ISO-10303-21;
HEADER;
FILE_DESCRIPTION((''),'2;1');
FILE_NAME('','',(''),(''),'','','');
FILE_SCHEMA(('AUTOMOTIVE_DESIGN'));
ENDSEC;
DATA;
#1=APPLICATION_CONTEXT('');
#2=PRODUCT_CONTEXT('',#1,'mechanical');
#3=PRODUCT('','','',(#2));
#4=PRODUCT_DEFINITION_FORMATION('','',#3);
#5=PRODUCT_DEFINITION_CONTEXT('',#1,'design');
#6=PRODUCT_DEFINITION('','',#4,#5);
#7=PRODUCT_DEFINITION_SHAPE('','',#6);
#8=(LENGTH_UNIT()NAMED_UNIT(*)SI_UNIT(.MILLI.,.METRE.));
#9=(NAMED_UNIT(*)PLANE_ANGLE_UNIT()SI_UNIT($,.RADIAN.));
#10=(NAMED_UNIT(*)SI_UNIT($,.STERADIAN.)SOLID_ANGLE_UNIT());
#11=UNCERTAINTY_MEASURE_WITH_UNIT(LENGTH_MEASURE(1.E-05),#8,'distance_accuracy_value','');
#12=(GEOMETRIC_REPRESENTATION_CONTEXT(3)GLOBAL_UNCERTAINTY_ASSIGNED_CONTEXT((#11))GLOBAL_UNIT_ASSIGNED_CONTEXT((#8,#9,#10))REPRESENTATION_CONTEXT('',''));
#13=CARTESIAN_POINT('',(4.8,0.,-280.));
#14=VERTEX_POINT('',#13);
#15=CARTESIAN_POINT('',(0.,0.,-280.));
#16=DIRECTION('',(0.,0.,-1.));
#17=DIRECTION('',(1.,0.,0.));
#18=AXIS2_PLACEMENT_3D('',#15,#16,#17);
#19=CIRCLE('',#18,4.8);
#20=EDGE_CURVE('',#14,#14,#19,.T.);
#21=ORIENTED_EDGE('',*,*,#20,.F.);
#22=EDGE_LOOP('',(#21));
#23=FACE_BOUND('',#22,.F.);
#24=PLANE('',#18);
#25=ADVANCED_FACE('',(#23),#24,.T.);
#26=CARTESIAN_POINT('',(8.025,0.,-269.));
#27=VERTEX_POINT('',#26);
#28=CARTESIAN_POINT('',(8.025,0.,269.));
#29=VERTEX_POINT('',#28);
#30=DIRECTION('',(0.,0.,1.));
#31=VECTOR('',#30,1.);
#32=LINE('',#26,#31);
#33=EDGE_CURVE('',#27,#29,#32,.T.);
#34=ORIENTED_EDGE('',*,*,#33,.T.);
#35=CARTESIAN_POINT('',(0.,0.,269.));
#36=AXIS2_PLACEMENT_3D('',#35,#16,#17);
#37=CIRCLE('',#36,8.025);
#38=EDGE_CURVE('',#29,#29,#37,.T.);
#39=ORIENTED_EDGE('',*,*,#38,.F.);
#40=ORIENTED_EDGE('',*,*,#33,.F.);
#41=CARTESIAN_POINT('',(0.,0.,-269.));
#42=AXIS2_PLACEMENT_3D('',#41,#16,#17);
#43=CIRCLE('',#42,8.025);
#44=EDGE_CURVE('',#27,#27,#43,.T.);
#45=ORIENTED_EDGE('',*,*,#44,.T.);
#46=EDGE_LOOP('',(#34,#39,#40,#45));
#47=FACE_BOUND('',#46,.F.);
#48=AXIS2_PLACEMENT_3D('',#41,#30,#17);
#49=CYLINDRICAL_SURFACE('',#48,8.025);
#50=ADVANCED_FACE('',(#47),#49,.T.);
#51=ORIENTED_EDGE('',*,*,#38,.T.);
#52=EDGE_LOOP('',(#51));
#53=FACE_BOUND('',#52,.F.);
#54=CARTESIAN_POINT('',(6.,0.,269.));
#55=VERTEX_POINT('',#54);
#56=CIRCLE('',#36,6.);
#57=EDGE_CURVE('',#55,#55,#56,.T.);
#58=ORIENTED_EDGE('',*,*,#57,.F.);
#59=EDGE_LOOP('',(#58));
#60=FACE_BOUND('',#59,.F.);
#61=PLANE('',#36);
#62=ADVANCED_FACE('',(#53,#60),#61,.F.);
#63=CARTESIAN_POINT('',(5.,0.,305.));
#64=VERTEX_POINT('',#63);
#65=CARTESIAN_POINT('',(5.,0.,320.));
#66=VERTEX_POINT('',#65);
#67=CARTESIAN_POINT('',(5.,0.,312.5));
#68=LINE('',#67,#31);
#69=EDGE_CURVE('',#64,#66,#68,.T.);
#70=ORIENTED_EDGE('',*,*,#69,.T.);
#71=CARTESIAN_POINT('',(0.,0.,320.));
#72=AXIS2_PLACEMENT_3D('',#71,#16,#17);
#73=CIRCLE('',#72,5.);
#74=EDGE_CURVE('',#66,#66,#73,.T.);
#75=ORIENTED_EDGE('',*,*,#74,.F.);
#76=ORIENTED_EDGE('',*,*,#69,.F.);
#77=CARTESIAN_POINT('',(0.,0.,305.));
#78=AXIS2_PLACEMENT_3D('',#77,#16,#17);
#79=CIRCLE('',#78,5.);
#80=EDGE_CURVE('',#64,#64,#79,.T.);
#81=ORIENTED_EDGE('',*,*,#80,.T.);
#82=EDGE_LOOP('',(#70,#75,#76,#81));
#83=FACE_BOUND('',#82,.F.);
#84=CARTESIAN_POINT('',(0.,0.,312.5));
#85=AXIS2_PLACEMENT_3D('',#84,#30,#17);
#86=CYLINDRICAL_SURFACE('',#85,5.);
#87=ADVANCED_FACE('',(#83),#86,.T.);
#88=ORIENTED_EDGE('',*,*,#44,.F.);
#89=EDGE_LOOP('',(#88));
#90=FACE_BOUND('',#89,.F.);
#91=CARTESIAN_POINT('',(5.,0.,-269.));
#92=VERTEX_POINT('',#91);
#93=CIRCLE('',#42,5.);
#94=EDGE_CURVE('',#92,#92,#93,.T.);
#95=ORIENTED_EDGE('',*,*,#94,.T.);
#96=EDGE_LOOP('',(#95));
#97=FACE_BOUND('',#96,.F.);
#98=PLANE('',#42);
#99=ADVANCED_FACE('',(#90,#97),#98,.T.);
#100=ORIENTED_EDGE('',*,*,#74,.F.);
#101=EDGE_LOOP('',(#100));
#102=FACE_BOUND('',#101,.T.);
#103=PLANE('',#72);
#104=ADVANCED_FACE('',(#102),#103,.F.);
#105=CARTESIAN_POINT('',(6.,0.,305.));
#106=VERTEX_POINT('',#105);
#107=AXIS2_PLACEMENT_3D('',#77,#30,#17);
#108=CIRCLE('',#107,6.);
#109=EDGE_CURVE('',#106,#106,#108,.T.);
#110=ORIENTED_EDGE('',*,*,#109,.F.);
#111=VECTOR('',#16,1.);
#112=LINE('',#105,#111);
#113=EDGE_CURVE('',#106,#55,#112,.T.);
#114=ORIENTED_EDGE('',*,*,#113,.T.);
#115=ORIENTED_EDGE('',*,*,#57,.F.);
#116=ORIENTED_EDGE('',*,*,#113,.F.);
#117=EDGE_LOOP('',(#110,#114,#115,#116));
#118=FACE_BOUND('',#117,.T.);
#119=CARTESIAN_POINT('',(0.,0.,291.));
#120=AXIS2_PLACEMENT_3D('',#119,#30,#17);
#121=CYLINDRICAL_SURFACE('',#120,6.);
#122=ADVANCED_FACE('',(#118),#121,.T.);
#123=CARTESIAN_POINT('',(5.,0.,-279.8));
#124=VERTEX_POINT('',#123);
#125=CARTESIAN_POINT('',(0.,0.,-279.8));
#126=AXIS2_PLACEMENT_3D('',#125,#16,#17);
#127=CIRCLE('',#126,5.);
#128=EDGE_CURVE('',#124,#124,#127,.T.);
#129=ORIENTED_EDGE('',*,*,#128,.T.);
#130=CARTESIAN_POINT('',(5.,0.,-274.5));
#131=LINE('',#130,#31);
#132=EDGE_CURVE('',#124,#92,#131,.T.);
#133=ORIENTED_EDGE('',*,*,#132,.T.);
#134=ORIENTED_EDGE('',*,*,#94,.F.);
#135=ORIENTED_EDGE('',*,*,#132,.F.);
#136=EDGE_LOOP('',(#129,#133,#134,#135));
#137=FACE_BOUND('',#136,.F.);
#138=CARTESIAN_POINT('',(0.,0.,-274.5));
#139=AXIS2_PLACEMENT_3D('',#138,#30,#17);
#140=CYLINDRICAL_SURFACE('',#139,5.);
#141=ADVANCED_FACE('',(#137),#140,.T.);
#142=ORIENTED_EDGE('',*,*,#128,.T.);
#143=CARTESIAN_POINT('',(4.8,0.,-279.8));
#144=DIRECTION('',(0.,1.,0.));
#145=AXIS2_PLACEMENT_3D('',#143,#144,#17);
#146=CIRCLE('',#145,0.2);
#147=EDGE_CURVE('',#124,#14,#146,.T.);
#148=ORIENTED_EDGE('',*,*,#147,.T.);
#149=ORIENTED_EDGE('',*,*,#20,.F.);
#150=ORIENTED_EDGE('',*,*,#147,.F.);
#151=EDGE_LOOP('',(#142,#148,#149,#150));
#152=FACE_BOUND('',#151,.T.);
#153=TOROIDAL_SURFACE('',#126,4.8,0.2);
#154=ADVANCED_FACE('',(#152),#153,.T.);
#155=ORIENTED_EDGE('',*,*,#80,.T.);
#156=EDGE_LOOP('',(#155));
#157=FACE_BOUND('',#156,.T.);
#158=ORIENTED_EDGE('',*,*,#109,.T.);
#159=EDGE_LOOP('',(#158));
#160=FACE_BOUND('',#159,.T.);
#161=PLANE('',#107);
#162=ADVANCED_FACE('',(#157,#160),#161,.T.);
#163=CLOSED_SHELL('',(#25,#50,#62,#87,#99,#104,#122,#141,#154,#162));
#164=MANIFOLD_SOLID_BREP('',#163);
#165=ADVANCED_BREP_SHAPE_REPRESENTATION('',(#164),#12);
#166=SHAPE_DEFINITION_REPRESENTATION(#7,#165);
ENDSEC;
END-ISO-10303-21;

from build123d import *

# Parameters (mm, degrees)
F0_W   = 5
F0_H   = 15
F0_W_2 = 6
F0_H_2 = 22
F0_H_3 = 11
F3_R   = 0.2


# Not quite as in the source:
# - the program builds the solid bodies; features that only make, move or delete a surface that nothing else refers to are left out


with BuildPart() as f1:
    # F0 (on Front) → F1 (revolve)
    with BuildSketch(Plane.XZ):
        with Locations((2.5, 312.5)):
            Rectangle(F0_W, F0_H)
    revolve(axis=Axis((0, 0, -110.3163262457), (0, 0, -1)))



with BuildPart() as f1b:
    # F0 (on Front) → F1, piece 2 (revolve)
    with BuildSketch(Plane.XZ):
        with Locations((3, 280)):
            Rectangle(F0_W_2, F0_H_2)
        Polygon((0, 269), (0, 59.3673475087), (0, -269), (5, -269), (8.025, -269), (8.025, 269), (6, 269), align=None)
        with Locations((2.5, -274.5)):
            Rectangle(F0_W, F0_H_3)
    revolve(axis=Axis((0, 0, -110.3163262457), (0, 0, -1)))


with BuildPart() as f1_1:
    add(f1.part)

    add(f1b.part)  # F2 merges F1b
    # F0 (on Front) → F2 (revolve)
    with BuildSketch(Plane.XZ):
        Polygon((0, 305), (0, 291), (6, 291), (6, 305), (5, 305), align=None)
    revolve(axis=Axis((0, 0, 189.6836737543), (0, 0, 1)))

    # F3
    f3_edges = [f1_1.edges().sort_by_distance(p)[0] for p in [
        (-5, 0, -280),
    ]]
    fillet(f3_edges, radius=F3_R)


solid = f1_1.part
